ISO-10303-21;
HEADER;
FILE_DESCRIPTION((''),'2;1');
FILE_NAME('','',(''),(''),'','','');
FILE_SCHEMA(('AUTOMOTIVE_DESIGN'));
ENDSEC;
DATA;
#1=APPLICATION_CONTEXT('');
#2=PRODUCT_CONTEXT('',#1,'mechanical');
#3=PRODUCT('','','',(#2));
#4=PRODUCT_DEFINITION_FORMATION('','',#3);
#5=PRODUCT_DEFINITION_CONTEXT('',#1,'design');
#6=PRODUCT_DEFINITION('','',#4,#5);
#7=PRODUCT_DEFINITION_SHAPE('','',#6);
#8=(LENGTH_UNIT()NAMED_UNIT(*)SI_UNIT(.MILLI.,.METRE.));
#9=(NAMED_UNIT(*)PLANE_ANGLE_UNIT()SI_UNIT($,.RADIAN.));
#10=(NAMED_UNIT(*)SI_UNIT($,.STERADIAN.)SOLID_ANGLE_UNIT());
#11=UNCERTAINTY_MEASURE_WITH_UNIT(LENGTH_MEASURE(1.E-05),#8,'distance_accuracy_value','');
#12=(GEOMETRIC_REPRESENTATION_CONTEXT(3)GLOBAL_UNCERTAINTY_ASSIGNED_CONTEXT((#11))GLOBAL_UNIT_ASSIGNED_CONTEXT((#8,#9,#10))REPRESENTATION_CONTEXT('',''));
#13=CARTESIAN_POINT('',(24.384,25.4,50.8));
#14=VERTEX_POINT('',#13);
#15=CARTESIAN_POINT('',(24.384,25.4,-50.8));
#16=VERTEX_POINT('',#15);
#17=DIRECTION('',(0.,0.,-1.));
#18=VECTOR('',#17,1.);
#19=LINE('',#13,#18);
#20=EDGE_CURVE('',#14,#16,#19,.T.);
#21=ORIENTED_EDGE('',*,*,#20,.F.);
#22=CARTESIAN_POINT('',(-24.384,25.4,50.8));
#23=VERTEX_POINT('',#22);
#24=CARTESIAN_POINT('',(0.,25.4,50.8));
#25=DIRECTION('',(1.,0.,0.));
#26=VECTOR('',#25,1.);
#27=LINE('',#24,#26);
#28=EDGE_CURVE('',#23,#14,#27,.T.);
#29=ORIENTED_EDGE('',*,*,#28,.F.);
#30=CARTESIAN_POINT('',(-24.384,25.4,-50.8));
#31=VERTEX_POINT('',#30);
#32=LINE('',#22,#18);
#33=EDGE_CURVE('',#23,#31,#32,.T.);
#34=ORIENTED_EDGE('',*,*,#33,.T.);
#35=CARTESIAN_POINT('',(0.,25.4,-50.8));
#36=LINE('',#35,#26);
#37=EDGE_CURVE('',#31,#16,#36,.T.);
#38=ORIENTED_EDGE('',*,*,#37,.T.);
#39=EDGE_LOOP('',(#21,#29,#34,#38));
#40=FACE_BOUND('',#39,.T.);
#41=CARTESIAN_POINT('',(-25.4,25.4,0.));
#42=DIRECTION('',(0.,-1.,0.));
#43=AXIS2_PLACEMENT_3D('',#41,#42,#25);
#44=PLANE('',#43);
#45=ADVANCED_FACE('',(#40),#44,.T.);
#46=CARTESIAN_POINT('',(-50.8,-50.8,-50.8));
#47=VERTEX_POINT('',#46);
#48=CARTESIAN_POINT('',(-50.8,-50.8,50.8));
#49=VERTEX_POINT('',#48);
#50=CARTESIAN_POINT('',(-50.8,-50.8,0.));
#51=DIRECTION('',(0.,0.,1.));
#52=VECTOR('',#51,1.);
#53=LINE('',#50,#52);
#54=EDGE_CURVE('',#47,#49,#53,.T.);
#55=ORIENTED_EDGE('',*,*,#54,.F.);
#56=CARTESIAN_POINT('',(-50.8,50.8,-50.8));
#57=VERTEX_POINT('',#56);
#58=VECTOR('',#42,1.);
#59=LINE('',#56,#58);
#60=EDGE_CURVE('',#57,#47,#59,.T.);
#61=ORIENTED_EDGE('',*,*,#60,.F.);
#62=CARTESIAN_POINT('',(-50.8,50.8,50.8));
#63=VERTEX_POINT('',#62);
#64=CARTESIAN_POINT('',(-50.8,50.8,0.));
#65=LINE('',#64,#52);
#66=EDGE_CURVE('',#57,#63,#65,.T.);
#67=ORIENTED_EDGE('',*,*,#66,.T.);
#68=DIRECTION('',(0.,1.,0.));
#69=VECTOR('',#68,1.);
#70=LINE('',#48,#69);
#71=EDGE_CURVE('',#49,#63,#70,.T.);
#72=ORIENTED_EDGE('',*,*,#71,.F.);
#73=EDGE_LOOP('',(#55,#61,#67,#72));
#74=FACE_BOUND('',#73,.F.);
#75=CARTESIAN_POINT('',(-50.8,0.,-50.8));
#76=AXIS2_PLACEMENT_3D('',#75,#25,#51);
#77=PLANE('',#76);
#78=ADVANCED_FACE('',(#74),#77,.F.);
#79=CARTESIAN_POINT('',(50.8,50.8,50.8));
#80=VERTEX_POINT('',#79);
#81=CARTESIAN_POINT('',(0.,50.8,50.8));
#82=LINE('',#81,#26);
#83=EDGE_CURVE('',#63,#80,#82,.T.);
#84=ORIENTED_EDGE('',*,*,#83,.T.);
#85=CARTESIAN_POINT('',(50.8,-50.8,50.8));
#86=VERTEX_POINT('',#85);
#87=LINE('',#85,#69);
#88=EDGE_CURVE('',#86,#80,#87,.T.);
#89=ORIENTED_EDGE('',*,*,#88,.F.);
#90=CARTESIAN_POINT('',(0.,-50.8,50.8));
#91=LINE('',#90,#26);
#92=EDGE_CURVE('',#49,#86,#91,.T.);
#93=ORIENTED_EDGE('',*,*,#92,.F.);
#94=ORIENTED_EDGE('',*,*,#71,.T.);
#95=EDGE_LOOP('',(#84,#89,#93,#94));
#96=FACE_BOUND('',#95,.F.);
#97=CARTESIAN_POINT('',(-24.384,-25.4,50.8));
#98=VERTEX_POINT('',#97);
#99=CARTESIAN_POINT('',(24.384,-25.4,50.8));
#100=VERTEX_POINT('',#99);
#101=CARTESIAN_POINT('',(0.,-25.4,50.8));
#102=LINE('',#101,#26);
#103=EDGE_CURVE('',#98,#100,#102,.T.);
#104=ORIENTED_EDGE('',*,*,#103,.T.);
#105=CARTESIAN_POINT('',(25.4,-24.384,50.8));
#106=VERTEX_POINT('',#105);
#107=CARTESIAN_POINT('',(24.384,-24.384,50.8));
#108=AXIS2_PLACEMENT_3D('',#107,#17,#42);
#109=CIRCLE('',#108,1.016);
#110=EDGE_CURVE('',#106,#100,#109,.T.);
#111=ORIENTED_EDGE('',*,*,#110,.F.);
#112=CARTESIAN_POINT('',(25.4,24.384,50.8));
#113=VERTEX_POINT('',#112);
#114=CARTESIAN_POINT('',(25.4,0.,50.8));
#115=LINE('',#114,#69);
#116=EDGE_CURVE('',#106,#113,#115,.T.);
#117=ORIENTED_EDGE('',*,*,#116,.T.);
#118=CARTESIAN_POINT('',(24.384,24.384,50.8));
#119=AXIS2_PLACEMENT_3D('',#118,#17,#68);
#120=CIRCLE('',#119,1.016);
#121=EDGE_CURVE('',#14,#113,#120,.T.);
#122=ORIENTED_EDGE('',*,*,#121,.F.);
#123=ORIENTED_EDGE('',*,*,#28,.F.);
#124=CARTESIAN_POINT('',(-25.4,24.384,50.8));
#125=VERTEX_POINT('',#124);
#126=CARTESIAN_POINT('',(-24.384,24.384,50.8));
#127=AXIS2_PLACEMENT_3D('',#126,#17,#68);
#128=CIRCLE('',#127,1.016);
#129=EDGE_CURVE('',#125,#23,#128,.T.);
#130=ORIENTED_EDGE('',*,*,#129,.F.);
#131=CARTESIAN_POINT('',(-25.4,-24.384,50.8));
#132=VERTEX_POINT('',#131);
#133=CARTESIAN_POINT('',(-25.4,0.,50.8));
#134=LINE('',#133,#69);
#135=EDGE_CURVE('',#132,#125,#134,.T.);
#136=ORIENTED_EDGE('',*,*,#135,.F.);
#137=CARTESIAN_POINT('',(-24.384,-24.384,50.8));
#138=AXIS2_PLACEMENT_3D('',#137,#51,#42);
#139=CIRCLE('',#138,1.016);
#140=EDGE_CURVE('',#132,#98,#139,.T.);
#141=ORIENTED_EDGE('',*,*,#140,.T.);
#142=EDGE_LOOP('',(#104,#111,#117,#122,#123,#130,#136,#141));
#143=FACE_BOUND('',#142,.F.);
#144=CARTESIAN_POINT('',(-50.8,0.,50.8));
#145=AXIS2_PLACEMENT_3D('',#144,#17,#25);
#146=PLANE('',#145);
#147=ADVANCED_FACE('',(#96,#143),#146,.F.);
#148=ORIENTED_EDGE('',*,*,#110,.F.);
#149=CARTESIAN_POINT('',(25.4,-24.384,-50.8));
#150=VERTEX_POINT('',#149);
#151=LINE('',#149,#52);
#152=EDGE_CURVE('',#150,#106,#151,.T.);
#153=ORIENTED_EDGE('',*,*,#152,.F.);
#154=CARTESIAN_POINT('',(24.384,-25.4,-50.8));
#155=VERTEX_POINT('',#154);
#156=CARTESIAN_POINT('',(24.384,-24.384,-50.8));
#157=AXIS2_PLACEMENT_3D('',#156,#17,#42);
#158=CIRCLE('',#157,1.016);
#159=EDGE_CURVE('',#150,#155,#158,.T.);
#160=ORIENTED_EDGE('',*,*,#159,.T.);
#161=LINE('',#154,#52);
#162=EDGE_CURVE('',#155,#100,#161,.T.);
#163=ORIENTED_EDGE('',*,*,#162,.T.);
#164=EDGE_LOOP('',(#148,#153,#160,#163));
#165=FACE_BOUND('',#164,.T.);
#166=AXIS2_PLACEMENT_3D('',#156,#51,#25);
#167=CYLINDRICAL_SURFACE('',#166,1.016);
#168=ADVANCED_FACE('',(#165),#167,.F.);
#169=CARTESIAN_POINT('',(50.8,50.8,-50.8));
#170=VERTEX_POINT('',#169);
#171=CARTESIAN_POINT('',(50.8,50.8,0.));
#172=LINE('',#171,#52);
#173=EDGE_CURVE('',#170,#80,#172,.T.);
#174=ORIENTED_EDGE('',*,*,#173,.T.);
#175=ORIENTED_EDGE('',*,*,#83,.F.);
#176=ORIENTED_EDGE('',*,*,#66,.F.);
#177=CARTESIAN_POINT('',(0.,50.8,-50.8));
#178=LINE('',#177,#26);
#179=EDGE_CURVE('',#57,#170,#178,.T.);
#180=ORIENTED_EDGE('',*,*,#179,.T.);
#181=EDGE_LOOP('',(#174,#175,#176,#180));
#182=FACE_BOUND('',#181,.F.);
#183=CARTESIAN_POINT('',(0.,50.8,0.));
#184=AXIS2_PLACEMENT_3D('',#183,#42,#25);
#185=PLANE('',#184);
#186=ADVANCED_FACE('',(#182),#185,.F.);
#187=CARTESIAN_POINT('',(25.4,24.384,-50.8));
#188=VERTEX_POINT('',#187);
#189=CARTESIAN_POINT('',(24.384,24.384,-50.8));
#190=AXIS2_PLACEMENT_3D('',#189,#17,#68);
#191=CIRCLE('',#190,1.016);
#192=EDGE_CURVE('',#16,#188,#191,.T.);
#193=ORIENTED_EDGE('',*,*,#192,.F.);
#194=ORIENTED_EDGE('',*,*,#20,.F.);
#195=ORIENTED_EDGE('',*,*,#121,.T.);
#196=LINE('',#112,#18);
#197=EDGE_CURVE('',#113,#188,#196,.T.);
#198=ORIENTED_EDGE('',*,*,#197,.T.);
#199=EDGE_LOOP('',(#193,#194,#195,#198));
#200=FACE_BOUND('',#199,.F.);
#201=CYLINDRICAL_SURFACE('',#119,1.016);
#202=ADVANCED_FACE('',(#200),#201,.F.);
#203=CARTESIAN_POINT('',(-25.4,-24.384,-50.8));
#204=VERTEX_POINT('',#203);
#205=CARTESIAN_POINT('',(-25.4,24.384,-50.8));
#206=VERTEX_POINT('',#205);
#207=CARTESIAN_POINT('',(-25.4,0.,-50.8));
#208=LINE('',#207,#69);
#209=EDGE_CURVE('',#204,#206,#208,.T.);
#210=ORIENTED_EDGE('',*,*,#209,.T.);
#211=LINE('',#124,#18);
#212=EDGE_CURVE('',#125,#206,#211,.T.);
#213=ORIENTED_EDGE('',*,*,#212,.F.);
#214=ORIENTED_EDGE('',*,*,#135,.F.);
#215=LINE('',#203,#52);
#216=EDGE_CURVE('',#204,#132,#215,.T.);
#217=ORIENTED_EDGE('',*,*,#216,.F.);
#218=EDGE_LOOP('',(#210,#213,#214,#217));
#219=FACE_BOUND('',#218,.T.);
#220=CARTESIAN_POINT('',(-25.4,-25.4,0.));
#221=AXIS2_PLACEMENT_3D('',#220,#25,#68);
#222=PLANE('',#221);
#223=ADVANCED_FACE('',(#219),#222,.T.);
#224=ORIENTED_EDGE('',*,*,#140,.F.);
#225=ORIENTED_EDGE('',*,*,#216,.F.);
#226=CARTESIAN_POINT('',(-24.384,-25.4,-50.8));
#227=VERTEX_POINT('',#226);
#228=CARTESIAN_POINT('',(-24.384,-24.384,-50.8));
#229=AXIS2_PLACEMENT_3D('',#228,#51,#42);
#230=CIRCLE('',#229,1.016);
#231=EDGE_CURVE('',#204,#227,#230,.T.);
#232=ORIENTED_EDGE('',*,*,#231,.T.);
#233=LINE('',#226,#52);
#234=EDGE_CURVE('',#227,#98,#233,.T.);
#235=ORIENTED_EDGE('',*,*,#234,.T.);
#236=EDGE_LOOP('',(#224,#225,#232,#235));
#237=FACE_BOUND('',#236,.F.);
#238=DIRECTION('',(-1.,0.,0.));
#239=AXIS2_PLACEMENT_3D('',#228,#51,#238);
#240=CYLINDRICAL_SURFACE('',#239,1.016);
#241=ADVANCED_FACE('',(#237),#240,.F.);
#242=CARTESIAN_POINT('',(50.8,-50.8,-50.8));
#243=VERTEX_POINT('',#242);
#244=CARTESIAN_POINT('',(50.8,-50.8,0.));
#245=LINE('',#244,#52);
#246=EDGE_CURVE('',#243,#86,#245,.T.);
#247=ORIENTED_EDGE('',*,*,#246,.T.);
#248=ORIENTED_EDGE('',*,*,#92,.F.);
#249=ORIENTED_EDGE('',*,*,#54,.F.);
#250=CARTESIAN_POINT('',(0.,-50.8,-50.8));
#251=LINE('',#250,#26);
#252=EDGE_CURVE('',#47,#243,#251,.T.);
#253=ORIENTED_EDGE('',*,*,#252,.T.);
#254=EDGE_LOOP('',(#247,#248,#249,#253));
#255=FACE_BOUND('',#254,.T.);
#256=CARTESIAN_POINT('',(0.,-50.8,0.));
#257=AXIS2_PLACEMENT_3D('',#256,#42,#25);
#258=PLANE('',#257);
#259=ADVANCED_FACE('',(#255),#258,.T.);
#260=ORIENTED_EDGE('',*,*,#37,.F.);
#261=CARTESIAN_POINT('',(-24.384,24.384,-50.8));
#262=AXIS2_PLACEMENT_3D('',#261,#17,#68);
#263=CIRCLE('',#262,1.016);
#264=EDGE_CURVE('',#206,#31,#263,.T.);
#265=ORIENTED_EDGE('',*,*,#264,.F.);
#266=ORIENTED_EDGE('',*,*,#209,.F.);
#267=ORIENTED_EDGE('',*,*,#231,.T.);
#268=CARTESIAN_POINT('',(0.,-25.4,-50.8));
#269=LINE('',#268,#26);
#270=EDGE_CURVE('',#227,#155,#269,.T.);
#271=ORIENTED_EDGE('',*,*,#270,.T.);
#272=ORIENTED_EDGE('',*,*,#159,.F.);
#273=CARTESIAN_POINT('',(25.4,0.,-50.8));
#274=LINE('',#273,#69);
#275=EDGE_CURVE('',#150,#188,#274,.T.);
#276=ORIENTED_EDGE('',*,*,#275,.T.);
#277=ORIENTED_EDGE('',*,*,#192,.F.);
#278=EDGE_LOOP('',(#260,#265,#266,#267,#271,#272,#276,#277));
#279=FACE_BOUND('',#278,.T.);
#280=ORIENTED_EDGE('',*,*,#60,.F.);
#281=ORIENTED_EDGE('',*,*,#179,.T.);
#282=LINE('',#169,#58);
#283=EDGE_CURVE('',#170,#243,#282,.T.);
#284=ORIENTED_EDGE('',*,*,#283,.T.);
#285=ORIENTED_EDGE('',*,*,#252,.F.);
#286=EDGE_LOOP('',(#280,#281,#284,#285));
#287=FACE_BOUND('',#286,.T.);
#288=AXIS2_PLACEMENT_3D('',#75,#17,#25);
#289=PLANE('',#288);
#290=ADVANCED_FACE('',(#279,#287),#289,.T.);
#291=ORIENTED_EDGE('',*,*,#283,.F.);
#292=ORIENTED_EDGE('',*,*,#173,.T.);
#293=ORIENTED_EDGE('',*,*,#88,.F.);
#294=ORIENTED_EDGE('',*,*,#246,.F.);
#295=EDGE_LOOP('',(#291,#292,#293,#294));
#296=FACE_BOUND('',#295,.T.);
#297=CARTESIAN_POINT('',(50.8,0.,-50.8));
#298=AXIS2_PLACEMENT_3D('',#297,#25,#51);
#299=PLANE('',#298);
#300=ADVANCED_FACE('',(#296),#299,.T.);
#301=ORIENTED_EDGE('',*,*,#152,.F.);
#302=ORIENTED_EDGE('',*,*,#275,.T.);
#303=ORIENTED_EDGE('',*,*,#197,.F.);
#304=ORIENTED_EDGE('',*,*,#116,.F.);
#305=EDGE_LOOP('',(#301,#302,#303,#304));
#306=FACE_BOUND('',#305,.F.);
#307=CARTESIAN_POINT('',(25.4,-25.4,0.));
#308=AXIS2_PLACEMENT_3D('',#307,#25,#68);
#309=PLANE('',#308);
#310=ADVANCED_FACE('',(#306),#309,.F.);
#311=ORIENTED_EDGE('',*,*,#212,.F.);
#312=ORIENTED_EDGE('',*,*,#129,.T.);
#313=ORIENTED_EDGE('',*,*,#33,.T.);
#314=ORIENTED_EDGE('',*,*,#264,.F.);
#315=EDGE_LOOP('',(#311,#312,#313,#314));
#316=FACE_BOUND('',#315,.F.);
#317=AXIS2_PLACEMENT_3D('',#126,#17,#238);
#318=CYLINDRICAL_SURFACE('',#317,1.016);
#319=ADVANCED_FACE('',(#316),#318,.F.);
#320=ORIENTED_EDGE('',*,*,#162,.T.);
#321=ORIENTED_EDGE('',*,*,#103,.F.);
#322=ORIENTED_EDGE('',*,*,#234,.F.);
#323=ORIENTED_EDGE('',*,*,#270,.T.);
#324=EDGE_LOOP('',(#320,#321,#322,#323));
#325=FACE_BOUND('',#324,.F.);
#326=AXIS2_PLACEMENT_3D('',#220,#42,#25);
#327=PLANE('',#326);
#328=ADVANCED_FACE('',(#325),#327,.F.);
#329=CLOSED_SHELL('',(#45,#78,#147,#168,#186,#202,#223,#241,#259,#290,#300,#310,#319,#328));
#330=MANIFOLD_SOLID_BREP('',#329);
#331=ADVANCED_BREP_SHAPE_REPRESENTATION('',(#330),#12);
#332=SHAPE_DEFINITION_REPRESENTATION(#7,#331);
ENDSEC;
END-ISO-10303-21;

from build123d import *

# Parameters (mm, degrees)
F0_W     = 101.6
F0_H     = 101.6
F1_DEPTH = 50.8
F2_W     = 50.8
F2_H     = 50.8
F3_DEPTH = 50.8
F4_R     = 1.016


with BuildPart() as f1:
    # F0 (on Front) → F1 (new body, symmetric)
    with BuildSketch(Plane.XZ):
        Rectangle(F0_W, F0_H)
    extrude(amount=F1_DEPTH, both=True)

    # F2 (on Top) → F3 (cut, symmetric)
    with BuildSketch(Plane.XY):
        Rectangle(F2_W, F2_H)
    extrude(amount=F3_DEPTH, both=True, mode=Mode.SUBTRACT)

    # F4
    f4_edges = [f1.edges().sort_by_distance(p)[0] for p in [
        (-25.4, -25.4, 0),
        (-25.4, 25.4, 0),
        (25.4, 25.4, 0),
        (25.4, -25.4, 0),
    ]]
    fillet(f4_edges, radius=F4_R)


solid = f1.part
